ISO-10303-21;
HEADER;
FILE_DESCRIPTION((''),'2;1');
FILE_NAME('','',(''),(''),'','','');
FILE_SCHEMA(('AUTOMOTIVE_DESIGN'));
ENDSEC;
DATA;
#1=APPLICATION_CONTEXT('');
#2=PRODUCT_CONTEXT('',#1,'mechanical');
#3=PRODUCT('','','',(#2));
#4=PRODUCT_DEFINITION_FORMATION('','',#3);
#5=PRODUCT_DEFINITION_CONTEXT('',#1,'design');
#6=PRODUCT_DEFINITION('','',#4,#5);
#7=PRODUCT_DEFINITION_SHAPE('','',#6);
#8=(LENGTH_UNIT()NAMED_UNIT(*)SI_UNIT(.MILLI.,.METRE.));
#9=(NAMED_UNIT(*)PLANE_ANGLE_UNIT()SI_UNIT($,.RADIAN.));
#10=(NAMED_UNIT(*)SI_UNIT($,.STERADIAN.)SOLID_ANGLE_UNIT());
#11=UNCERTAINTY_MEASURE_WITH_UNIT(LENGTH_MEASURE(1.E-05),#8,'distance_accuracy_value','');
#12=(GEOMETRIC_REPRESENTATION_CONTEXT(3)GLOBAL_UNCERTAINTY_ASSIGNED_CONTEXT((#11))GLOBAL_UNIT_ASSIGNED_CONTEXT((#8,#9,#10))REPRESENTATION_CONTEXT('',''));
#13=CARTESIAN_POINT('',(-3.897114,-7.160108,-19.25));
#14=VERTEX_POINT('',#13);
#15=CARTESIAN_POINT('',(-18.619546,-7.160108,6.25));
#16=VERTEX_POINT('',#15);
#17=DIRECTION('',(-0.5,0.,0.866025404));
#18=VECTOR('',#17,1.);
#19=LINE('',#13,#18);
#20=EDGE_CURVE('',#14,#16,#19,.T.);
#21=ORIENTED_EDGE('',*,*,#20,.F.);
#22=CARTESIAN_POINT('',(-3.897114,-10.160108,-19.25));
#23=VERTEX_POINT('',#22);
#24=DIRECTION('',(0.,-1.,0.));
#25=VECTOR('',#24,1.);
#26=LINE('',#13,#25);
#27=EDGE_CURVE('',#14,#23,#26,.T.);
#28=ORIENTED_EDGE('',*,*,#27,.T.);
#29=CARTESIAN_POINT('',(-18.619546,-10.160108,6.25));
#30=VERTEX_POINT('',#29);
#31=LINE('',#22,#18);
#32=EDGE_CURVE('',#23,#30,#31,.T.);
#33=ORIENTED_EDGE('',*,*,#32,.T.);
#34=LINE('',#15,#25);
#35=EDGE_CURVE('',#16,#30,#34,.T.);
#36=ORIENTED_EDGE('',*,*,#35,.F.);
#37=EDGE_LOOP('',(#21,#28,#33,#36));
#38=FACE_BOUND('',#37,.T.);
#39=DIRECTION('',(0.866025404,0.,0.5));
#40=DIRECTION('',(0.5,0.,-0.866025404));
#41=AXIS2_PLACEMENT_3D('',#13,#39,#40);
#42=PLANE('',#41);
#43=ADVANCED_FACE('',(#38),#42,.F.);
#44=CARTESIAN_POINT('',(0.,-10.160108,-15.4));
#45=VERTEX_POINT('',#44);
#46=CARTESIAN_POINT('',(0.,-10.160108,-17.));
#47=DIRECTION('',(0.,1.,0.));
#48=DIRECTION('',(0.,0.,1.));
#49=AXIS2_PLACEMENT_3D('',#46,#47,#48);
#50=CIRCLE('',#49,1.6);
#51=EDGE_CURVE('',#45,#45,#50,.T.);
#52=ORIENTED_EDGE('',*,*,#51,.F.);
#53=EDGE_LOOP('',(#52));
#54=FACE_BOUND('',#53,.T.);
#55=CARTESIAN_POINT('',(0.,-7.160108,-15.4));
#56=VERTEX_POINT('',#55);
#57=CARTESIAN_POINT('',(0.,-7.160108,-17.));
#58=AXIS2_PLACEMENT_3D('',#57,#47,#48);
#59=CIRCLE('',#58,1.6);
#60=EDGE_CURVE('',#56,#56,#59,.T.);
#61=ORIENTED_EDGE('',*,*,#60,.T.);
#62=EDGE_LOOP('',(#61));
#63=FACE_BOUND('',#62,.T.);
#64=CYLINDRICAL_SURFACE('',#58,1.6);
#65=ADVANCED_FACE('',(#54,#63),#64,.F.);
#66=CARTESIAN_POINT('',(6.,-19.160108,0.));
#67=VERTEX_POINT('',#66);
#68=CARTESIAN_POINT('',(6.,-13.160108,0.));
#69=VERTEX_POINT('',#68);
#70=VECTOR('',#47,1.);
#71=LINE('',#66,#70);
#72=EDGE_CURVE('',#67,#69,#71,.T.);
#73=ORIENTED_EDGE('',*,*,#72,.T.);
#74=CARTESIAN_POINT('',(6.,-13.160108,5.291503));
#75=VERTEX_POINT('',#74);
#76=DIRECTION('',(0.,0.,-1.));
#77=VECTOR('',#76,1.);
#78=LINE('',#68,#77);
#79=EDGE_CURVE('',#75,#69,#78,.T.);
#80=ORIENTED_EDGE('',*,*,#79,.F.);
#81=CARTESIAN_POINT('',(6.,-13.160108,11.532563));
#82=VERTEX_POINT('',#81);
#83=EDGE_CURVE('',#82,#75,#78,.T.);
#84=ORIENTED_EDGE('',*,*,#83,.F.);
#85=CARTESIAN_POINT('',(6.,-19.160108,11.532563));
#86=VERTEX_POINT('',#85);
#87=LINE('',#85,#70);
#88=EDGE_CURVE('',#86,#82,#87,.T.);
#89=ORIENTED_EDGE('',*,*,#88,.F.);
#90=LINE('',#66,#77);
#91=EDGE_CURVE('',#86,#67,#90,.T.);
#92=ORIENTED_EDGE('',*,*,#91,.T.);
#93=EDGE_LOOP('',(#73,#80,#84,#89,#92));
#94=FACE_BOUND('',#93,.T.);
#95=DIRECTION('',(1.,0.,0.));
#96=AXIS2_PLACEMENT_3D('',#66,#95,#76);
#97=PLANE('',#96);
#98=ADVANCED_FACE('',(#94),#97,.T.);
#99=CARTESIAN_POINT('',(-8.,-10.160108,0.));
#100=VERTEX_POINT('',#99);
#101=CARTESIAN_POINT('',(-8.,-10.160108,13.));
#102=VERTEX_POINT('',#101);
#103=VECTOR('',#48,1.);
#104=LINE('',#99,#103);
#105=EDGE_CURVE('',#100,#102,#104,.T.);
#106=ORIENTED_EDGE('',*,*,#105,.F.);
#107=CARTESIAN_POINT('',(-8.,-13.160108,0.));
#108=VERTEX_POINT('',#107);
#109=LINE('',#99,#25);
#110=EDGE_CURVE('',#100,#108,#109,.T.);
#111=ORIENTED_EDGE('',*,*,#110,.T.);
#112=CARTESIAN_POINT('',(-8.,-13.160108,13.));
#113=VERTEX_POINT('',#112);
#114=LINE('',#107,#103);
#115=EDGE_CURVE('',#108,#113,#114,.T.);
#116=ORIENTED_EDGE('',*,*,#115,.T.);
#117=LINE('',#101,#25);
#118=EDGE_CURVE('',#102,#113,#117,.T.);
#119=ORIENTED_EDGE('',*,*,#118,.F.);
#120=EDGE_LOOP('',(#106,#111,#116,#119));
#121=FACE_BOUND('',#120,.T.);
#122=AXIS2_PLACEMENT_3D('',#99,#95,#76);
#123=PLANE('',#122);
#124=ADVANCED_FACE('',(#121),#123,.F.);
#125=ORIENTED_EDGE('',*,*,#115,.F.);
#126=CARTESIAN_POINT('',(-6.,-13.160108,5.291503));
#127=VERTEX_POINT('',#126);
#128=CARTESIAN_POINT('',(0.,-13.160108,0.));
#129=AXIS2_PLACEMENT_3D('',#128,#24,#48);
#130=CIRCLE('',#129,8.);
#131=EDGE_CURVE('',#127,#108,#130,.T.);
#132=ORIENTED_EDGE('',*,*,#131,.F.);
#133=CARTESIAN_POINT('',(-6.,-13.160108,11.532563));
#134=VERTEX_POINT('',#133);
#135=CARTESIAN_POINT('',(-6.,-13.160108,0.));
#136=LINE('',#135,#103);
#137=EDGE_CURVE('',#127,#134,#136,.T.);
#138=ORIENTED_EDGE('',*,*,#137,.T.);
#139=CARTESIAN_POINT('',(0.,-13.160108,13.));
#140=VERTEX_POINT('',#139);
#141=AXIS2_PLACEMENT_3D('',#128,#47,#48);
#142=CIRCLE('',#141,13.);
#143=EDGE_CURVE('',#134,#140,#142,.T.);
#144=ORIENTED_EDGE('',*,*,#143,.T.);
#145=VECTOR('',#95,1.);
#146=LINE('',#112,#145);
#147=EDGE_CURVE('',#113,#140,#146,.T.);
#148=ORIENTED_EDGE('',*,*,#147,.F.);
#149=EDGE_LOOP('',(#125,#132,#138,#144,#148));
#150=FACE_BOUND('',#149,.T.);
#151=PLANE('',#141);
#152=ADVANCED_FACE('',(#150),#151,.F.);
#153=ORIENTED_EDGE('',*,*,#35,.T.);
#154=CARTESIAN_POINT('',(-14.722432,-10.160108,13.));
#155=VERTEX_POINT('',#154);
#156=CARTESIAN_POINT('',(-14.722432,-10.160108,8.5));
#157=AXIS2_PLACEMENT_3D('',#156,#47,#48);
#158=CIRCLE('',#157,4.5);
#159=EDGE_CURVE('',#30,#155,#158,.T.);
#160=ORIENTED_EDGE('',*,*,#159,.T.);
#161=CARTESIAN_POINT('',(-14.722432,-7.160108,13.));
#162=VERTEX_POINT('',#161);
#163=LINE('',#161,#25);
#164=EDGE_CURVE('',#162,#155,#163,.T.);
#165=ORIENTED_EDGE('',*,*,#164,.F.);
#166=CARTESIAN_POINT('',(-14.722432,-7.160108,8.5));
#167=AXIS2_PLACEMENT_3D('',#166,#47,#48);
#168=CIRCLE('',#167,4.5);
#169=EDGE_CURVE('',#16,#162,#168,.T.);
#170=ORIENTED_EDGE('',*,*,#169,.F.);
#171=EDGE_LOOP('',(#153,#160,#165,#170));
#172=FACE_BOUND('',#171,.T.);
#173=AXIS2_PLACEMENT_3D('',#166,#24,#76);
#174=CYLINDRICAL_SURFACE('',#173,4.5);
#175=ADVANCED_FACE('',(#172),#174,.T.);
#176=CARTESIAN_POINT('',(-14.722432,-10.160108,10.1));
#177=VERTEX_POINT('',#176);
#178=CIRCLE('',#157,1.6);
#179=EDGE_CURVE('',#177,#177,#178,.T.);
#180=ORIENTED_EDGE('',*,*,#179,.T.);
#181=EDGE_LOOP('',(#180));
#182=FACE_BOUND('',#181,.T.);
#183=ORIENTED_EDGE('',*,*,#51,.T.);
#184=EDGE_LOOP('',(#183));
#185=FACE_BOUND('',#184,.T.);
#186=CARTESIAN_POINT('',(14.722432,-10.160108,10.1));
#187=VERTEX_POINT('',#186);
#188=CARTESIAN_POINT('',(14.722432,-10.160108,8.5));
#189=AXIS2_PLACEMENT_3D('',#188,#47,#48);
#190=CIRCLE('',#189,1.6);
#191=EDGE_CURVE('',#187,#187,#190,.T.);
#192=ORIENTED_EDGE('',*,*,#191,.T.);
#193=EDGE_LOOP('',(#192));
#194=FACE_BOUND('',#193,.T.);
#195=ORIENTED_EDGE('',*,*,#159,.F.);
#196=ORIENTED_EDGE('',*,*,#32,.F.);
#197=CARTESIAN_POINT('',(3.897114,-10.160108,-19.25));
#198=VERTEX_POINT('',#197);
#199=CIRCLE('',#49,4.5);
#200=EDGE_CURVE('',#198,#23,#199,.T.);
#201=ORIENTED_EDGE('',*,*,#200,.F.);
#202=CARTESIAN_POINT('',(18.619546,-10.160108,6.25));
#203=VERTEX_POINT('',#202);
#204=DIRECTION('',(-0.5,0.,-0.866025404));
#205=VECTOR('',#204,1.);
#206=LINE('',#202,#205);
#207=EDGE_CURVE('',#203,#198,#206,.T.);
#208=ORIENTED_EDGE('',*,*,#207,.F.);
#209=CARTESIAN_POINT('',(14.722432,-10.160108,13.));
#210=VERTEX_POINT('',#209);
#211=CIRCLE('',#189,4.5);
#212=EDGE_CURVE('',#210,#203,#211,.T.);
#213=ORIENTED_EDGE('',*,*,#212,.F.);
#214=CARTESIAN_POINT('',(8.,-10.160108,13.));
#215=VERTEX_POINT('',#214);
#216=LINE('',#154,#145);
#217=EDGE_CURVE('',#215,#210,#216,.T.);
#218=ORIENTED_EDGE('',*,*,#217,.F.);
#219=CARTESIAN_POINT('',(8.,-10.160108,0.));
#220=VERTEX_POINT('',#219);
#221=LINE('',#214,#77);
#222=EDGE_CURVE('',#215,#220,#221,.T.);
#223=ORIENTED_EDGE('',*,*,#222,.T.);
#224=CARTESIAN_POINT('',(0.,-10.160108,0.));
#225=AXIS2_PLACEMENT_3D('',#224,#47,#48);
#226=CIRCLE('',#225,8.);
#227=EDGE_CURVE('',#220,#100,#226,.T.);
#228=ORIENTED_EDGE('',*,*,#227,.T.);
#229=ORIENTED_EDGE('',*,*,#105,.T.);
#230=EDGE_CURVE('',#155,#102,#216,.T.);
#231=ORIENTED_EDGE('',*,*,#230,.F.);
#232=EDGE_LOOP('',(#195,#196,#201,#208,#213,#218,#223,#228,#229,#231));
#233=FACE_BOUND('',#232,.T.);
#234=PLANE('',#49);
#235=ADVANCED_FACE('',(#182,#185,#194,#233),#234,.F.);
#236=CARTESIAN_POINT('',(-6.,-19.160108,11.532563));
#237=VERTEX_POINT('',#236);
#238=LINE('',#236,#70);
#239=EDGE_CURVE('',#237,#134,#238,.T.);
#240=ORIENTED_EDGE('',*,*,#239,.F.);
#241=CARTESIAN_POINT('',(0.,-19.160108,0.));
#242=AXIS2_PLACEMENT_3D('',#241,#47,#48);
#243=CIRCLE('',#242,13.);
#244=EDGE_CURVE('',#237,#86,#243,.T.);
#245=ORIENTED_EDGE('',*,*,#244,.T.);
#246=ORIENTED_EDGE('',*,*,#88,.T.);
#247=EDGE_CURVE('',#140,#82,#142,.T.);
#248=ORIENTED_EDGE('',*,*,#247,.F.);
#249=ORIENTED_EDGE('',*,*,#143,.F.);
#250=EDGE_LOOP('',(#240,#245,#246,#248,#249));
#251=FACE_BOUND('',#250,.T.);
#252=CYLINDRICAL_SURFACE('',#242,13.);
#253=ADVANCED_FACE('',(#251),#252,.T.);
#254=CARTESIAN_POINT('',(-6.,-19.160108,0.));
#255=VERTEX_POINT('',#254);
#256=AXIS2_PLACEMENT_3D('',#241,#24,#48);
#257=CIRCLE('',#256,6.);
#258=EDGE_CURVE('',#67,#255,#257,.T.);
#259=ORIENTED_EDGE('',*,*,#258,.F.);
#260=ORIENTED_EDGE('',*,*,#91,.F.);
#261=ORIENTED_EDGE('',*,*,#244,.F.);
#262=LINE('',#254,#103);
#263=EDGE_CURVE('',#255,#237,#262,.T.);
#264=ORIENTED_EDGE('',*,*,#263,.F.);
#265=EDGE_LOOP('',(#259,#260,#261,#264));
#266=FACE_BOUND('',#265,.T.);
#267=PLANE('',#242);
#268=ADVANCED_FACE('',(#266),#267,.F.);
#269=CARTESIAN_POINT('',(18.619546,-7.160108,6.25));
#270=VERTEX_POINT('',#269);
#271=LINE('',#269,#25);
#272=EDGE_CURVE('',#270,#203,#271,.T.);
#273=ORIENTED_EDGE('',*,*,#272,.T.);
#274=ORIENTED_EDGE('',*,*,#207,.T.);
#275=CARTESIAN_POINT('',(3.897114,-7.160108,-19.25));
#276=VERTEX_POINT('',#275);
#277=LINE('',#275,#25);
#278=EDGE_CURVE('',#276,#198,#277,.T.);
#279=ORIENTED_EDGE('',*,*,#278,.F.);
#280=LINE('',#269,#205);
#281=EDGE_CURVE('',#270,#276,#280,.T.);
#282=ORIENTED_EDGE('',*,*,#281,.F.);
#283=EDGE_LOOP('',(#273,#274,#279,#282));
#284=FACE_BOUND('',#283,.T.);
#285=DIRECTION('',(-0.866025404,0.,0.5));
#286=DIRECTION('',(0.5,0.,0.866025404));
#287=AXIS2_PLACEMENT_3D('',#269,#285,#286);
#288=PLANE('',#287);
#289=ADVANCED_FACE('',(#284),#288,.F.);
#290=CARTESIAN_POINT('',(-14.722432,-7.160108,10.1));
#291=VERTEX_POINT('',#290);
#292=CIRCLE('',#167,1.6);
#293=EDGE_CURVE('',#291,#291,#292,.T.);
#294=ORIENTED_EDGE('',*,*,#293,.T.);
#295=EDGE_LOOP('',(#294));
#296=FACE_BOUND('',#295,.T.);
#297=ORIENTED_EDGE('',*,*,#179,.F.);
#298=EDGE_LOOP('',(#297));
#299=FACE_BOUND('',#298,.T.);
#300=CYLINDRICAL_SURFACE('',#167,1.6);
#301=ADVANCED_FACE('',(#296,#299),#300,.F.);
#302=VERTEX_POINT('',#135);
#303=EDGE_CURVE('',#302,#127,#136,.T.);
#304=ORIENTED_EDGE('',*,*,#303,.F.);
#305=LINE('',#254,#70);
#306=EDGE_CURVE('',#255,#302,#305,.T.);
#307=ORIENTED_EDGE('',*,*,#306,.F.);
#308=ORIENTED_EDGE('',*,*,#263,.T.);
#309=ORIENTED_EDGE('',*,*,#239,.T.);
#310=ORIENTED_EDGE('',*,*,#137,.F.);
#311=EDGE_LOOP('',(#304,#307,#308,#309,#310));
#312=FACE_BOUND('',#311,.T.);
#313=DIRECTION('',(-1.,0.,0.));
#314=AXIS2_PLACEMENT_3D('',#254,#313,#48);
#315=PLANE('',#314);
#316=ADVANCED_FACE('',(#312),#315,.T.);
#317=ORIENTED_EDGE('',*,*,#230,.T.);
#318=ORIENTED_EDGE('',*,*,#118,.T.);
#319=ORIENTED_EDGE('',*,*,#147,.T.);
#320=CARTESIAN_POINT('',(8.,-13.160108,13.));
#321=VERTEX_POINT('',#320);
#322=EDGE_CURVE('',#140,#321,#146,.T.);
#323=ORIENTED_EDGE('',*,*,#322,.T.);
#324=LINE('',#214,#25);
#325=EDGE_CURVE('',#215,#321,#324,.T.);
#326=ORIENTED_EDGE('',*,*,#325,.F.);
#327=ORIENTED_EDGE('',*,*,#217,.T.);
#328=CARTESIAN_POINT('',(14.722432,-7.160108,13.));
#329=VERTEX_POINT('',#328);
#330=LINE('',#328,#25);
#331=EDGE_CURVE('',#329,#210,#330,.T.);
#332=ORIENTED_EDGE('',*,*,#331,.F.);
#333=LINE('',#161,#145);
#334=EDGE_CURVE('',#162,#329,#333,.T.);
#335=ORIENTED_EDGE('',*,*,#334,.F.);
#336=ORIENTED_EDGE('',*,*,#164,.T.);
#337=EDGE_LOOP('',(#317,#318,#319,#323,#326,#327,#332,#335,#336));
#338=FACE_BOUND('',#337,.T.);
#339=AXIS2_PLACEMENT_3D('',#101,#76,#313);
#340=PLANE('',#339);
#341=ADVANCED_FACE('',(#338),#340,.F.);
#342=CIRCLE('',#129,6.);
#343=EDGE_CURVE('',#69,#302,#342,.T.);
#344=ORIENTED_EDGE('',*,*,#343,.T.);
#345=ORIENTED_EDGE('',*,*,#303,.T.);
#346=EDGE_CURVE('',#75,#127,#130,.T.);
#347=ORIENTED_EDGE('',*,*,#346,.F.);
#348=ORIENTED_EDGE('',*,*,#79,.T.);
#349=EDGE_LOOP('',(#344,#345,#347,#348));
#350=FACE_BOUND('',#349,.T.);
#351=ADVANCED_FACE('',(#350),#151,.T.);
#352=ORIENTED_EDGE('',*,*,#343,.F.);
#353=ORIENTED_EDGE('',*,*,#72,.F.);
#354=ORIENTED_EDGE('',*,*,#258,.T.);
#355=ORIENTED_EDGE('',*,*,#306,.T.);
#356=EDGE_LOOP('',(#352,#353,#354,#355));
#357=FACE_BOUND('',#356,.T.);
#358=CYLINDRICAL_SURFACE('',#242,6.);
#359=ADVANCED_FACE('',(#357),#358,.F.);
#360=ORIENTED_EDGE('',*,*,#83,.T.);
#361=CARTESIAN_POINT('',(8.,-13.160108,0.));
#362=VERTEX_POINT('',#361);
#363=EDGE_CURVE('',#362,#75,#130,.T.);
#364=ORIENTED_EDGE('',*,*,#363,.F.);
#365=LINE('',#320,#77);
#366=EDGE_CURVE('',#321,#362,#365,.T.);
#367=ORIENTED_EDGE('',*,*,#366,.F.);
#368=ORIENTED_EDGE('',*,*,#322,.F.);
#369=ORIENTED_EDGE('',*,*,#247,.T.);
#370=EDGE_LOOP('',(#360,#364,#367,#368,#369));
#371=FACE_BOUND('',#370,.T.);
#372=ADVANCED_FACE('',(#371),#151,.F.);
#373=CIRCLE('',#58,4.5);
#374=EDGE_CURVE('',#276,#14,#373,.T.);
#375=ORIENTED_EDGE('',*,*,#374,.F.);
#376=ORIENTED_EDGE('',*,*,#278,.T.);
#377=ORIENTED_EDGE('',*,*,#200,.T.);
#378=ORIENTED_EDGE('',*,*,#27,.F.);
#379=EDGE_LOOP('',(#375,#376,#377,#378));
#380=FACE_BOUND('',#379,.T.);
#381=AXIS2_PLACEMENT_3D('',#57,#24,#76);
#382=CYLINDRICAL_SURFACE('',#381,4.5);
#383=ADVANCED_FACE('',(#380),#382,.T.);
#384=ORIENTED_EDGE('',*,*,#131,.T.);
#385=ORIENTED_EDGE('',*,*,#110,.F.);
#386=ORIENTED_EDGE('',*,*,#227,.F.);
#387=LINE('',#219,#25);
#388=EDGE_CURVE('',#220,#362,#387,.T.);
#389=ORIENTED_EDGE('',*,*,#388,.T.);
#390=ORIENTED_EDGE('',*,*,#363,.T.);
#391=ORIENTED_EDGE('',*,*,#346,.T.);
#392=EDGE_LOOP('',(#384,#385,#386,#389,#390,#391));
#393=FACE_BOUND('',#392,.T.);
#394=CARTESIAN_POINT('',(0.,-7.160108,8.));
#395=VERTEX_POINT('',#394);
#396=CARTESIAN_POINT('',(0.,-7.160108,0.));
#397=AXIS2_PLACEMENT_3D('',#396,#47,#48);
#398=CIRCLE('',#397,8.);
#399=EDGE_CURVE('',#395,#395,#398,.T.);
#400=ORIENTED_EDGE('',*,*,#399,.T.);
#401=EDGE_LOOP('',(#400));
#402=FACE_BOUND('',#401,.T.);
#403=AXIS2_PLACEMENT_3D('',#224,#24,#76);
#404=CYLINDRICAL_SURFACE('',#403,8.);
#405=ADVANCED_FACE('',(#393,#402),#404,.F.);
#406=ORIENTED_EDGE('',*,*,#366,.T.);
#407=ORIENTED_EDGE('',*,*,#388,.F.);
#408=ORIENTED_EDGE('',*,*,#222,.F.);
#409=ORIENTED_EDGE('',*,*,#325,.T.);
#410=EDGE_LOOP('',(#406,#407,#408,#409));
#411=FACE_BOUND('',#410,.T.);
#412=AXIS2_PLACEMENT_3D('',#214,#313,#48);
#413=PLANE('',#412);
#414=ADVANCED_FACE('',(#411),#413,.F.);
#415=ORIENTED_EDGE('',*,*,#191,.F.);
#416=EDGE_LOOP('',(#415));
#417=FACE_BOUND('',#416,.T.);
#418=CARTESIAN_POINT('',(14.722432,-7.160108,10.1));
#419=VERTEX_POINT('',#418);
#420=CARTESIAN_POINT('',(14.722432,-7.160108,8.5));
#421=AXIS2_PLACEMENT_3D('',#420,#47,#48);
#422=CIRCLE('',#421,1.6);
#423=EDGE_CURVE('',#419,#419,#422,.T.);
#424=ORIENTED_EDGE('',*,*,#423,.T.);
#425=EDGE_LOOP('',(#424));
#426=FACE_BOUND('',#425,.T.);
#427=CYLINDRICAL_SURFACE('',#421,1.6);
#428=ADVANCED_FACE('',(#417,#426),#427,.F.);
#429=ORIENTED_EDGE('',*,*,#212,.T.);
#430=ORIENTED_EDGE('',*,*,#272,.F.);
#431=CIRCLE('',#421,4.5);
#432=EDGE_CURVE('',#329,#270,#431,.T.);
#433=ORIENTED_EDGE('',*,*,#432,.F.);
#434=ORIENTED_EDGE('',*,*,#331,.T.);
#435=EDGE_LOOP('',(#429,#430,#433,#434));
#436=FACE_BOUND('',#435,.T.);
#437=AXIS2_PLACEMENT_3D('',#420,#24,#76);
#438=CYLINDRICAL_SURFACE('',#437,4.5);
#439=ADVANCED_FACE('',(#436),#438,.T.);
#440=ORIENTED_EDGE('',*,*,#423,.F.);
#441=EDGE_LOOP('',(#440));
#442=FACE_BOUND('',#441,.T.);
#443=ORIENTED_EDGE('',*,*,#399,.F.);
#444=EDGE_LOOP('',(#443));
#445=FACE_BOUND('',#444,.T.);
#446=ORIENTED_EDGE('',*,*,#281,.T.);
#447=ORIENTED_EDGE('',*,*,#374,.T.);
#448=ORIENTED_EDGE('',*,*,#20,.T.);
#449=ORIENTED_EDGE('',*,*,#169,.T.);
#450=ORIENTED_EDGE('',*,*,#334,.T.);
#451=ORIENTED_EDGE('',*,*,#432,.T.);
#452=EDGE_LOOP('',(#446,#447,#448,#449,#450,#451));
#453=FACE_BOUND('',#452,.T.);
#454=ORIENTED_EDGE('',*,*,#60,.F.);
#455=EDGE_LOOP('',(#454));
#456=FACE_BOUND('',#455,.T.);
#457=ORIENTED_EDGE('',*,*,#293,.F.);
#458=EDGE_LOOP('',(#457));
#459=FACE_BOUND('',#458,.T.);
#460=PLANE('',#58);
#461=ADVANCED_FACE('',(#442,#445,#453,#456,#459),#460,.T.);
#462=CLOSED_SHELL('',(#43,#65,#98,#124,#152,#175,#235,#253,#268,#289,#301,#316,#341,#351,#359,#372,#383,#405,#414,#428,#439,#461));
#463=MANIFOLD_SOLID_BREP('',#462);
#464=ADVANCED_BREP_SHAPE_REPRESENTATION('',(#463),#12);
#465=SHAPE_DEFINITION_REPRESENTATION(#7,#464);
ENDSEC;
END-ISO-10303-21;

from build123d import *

# Parameters (mm, degrees)
EXTRUDE_1_DEPTH   = 6
EXTRUDE_2_DEPTH   = 3
SKETCH_4_R        = 8
EXTRUDE_3_DEPTH   = 3
OTHER_START       = -10.160108376
OTHER_1_OUTLINE_R = 1.6
OTHER_1_DEPTH     = 3


# Read off the part's stored shape, not the designer's step: 高级异型孔1
with BuildPart() as part:
    # 草图1 → 凸台-拉伸1 (new body)
    with BuildSketch(Plane(origin=(0, -13.160108376, 0), x_dir=(1, 0, 0), z_dir=(0, 1, 0))):
        with BuildLine():
            Line((-6, 0), (-6, -11.532562595))
            ThreePointArc((-6, -11.532562595), (0, -13), (6, -11.532562595))
            Line((6, -11.532562595), (6, 0))
            ThreePointArc((6, 0), (0, -6), (-6, 0))
        make_face()
    extrude(amount=-EXTRUDE_1_DEPTH)

    # 草图2 → 凸台-拉伸2 (add)
    with BuildSketch(Plane(origin=(0, -13.160108376, 0), x_dir=(1, 0, 0), z_dir=(0, 1, 0))):
        with BuildLine():
            Line((-8, 0), (-8, -13))
            Line((-8, -13), (8, -13))
            Line((8, -13), (8, 0))
            ThreePointArc((8, 0), (0, -8), (-8, 0))
        make_face()
    extrude(amount=EXTRUDE_2_DEPTH)

    # 草图4 → 凸台-拉伸3 (add)
    with BuildSketch(Plane(origin=(0, -10.160108376, -27), x_dir=(1, 0, 0), z_dir=(0, 1, 0))):
        with BuildLine():
            Line((-3.897114317, -7.75), (-18.619546181, -33.25))
            ThreePointArc((-18.619546181, -33.25), (-18.619546181, -37.75), (-14.722431864, -40))
            Line((-14.722431864, -40), (14.722431864, -40))
            ThreePointArc((14.722431864, -40), (18.619546181, -37.75), (18.619546181, -33.25))
            Line((18.619546181, -33.25), (3.897114317, -7.75))
            ThreePointArc((3.897114317, -7.75), (0, -5.5), (-3.897114317, -7.75))
        make_face()
        with Locations((0, -27)):
            Circle(SKETCH_4_R, mode=Mode.SUBTRACT)
    extrude(amount=EXTRUDE_3_DEPTH)

    # 高级异型孔1 outline → 高级异型孔1 (cut)
    with BuildSketch(Plane(origin=(0, 0, 0), x_dir=(1, 0, 0), z_dir=(0, 1, 0)).offset(OTHER_START)):
        with Locations((-14.722431864, -8.5)):
            Circle(OTHER_1_OUTLINE_R)
        with Locations((14.722431864, -8.5)):
            Circle(OTHER_1_OUTLINE_R)
        with Locations((0, 17)):
            Circle(OTHER_1_OUTLINE_R)
    extrude(amount=OTHER_1_DEPTH, mode=Mode.SUBTRACT)


solid = part.part
